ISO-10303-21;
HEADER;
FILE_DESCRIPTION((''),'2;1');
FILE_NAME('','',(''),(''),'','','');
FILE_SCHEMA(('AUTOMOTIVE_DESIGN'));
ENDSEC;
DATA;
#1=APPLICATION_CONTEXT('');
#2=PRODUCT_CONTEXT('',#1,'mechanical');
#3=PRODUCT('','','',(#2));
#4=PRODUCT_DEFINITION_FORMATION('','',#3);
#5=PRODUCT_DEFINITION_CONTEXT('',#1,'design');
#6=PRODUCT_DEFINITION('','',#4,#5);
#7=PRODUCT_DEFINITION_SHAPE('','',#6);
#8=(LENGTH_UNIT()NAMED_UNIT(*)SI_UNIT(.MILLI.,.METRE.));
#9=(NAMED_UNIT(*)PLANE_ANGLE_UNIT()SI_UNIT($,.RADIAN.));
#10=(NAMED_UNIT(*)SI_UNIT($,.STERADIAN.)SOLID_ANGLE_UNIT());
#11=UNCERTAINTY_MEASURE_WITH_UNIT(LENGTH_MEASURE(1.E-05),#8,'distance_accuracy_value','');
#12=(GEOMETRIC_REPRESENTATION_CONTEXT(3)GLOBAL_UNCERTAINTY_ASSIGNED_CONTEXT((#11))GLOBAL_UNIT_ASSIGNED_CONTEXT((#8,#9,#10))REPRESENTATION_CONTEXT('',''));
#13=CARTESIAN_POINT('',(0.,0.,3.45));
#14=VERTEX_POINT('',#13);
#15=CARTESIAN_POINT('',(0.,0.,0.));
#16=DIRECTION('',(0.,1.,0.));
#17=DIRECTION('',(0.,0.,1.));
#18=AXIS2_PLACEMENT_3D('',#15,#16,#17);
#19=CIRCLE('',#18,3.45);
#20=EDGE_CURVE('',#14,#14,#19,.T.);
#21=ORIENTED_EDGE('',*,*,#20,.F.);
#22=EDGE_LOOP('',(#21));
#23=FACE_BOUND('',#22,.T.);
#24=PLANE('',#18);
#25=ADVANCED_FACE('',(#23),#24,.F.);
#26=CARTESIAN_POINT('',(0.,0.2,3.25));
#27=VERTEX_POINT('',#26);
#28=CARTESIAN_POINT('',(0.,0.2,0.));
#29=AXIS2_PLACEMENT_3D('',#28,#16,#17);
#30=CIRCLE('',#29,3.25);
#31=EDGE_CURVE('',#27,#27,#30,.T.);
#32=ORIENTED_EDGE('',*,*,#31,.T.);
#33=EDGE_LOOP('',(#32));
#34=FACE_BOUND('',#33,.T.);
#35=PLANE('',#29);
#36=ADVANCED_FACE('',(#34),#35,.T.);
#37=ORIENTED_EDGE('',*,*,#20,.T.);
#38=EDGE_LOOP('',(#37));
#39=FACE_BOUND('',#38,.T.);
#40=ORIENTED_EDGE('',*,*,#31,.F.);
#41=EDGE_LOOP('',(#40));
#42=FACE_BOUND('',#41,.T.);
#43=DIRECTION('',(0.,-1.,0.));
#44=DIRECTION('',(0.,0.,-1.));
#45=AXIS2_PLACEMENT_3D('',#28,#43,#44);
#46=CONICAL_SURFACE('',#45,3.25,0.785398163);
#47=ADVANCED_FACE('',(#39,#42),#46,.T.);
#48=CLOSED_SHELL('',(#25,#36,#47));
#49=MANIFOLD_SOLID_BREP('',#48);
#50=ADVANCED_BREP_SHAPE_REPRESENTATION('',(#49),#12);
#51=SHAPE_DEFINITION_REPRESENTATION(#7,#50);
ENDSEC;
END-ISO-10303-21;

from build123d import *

# Parameters (mm, degrees)
SKETCH1_R           = 3.45
BOSS_EXTRUDE1_DEPTH = 0.2
CHAMFER1_SIZE       = 0.2


with BuildPart() as part:
    # Sketch1 → Boss-Extrude1 (new body)
    with BuildSketch(Plane(origin=(0, 0, 0), x_dir=(1, 0, 0), z_dir=(0, 1, 0))):
        with Locations(Location((0, 0, 0), (0, 0, 270))):
            Circle(SKETCH1_R)
    extrude(amount=BOSS_EXTRUDE1_DEPTH)

    # Chamfer1
    chamfer1_edges = [part.edges().sort_by_distance(p)[0] for p in [
        (0, 0.2, -3.45),
    ]]
    chamfer(chamfer1_edges, length=CHAMFER1_SIZE - 0.0001)  # a hair under: the kernel refuses the full size


solid = part.part
